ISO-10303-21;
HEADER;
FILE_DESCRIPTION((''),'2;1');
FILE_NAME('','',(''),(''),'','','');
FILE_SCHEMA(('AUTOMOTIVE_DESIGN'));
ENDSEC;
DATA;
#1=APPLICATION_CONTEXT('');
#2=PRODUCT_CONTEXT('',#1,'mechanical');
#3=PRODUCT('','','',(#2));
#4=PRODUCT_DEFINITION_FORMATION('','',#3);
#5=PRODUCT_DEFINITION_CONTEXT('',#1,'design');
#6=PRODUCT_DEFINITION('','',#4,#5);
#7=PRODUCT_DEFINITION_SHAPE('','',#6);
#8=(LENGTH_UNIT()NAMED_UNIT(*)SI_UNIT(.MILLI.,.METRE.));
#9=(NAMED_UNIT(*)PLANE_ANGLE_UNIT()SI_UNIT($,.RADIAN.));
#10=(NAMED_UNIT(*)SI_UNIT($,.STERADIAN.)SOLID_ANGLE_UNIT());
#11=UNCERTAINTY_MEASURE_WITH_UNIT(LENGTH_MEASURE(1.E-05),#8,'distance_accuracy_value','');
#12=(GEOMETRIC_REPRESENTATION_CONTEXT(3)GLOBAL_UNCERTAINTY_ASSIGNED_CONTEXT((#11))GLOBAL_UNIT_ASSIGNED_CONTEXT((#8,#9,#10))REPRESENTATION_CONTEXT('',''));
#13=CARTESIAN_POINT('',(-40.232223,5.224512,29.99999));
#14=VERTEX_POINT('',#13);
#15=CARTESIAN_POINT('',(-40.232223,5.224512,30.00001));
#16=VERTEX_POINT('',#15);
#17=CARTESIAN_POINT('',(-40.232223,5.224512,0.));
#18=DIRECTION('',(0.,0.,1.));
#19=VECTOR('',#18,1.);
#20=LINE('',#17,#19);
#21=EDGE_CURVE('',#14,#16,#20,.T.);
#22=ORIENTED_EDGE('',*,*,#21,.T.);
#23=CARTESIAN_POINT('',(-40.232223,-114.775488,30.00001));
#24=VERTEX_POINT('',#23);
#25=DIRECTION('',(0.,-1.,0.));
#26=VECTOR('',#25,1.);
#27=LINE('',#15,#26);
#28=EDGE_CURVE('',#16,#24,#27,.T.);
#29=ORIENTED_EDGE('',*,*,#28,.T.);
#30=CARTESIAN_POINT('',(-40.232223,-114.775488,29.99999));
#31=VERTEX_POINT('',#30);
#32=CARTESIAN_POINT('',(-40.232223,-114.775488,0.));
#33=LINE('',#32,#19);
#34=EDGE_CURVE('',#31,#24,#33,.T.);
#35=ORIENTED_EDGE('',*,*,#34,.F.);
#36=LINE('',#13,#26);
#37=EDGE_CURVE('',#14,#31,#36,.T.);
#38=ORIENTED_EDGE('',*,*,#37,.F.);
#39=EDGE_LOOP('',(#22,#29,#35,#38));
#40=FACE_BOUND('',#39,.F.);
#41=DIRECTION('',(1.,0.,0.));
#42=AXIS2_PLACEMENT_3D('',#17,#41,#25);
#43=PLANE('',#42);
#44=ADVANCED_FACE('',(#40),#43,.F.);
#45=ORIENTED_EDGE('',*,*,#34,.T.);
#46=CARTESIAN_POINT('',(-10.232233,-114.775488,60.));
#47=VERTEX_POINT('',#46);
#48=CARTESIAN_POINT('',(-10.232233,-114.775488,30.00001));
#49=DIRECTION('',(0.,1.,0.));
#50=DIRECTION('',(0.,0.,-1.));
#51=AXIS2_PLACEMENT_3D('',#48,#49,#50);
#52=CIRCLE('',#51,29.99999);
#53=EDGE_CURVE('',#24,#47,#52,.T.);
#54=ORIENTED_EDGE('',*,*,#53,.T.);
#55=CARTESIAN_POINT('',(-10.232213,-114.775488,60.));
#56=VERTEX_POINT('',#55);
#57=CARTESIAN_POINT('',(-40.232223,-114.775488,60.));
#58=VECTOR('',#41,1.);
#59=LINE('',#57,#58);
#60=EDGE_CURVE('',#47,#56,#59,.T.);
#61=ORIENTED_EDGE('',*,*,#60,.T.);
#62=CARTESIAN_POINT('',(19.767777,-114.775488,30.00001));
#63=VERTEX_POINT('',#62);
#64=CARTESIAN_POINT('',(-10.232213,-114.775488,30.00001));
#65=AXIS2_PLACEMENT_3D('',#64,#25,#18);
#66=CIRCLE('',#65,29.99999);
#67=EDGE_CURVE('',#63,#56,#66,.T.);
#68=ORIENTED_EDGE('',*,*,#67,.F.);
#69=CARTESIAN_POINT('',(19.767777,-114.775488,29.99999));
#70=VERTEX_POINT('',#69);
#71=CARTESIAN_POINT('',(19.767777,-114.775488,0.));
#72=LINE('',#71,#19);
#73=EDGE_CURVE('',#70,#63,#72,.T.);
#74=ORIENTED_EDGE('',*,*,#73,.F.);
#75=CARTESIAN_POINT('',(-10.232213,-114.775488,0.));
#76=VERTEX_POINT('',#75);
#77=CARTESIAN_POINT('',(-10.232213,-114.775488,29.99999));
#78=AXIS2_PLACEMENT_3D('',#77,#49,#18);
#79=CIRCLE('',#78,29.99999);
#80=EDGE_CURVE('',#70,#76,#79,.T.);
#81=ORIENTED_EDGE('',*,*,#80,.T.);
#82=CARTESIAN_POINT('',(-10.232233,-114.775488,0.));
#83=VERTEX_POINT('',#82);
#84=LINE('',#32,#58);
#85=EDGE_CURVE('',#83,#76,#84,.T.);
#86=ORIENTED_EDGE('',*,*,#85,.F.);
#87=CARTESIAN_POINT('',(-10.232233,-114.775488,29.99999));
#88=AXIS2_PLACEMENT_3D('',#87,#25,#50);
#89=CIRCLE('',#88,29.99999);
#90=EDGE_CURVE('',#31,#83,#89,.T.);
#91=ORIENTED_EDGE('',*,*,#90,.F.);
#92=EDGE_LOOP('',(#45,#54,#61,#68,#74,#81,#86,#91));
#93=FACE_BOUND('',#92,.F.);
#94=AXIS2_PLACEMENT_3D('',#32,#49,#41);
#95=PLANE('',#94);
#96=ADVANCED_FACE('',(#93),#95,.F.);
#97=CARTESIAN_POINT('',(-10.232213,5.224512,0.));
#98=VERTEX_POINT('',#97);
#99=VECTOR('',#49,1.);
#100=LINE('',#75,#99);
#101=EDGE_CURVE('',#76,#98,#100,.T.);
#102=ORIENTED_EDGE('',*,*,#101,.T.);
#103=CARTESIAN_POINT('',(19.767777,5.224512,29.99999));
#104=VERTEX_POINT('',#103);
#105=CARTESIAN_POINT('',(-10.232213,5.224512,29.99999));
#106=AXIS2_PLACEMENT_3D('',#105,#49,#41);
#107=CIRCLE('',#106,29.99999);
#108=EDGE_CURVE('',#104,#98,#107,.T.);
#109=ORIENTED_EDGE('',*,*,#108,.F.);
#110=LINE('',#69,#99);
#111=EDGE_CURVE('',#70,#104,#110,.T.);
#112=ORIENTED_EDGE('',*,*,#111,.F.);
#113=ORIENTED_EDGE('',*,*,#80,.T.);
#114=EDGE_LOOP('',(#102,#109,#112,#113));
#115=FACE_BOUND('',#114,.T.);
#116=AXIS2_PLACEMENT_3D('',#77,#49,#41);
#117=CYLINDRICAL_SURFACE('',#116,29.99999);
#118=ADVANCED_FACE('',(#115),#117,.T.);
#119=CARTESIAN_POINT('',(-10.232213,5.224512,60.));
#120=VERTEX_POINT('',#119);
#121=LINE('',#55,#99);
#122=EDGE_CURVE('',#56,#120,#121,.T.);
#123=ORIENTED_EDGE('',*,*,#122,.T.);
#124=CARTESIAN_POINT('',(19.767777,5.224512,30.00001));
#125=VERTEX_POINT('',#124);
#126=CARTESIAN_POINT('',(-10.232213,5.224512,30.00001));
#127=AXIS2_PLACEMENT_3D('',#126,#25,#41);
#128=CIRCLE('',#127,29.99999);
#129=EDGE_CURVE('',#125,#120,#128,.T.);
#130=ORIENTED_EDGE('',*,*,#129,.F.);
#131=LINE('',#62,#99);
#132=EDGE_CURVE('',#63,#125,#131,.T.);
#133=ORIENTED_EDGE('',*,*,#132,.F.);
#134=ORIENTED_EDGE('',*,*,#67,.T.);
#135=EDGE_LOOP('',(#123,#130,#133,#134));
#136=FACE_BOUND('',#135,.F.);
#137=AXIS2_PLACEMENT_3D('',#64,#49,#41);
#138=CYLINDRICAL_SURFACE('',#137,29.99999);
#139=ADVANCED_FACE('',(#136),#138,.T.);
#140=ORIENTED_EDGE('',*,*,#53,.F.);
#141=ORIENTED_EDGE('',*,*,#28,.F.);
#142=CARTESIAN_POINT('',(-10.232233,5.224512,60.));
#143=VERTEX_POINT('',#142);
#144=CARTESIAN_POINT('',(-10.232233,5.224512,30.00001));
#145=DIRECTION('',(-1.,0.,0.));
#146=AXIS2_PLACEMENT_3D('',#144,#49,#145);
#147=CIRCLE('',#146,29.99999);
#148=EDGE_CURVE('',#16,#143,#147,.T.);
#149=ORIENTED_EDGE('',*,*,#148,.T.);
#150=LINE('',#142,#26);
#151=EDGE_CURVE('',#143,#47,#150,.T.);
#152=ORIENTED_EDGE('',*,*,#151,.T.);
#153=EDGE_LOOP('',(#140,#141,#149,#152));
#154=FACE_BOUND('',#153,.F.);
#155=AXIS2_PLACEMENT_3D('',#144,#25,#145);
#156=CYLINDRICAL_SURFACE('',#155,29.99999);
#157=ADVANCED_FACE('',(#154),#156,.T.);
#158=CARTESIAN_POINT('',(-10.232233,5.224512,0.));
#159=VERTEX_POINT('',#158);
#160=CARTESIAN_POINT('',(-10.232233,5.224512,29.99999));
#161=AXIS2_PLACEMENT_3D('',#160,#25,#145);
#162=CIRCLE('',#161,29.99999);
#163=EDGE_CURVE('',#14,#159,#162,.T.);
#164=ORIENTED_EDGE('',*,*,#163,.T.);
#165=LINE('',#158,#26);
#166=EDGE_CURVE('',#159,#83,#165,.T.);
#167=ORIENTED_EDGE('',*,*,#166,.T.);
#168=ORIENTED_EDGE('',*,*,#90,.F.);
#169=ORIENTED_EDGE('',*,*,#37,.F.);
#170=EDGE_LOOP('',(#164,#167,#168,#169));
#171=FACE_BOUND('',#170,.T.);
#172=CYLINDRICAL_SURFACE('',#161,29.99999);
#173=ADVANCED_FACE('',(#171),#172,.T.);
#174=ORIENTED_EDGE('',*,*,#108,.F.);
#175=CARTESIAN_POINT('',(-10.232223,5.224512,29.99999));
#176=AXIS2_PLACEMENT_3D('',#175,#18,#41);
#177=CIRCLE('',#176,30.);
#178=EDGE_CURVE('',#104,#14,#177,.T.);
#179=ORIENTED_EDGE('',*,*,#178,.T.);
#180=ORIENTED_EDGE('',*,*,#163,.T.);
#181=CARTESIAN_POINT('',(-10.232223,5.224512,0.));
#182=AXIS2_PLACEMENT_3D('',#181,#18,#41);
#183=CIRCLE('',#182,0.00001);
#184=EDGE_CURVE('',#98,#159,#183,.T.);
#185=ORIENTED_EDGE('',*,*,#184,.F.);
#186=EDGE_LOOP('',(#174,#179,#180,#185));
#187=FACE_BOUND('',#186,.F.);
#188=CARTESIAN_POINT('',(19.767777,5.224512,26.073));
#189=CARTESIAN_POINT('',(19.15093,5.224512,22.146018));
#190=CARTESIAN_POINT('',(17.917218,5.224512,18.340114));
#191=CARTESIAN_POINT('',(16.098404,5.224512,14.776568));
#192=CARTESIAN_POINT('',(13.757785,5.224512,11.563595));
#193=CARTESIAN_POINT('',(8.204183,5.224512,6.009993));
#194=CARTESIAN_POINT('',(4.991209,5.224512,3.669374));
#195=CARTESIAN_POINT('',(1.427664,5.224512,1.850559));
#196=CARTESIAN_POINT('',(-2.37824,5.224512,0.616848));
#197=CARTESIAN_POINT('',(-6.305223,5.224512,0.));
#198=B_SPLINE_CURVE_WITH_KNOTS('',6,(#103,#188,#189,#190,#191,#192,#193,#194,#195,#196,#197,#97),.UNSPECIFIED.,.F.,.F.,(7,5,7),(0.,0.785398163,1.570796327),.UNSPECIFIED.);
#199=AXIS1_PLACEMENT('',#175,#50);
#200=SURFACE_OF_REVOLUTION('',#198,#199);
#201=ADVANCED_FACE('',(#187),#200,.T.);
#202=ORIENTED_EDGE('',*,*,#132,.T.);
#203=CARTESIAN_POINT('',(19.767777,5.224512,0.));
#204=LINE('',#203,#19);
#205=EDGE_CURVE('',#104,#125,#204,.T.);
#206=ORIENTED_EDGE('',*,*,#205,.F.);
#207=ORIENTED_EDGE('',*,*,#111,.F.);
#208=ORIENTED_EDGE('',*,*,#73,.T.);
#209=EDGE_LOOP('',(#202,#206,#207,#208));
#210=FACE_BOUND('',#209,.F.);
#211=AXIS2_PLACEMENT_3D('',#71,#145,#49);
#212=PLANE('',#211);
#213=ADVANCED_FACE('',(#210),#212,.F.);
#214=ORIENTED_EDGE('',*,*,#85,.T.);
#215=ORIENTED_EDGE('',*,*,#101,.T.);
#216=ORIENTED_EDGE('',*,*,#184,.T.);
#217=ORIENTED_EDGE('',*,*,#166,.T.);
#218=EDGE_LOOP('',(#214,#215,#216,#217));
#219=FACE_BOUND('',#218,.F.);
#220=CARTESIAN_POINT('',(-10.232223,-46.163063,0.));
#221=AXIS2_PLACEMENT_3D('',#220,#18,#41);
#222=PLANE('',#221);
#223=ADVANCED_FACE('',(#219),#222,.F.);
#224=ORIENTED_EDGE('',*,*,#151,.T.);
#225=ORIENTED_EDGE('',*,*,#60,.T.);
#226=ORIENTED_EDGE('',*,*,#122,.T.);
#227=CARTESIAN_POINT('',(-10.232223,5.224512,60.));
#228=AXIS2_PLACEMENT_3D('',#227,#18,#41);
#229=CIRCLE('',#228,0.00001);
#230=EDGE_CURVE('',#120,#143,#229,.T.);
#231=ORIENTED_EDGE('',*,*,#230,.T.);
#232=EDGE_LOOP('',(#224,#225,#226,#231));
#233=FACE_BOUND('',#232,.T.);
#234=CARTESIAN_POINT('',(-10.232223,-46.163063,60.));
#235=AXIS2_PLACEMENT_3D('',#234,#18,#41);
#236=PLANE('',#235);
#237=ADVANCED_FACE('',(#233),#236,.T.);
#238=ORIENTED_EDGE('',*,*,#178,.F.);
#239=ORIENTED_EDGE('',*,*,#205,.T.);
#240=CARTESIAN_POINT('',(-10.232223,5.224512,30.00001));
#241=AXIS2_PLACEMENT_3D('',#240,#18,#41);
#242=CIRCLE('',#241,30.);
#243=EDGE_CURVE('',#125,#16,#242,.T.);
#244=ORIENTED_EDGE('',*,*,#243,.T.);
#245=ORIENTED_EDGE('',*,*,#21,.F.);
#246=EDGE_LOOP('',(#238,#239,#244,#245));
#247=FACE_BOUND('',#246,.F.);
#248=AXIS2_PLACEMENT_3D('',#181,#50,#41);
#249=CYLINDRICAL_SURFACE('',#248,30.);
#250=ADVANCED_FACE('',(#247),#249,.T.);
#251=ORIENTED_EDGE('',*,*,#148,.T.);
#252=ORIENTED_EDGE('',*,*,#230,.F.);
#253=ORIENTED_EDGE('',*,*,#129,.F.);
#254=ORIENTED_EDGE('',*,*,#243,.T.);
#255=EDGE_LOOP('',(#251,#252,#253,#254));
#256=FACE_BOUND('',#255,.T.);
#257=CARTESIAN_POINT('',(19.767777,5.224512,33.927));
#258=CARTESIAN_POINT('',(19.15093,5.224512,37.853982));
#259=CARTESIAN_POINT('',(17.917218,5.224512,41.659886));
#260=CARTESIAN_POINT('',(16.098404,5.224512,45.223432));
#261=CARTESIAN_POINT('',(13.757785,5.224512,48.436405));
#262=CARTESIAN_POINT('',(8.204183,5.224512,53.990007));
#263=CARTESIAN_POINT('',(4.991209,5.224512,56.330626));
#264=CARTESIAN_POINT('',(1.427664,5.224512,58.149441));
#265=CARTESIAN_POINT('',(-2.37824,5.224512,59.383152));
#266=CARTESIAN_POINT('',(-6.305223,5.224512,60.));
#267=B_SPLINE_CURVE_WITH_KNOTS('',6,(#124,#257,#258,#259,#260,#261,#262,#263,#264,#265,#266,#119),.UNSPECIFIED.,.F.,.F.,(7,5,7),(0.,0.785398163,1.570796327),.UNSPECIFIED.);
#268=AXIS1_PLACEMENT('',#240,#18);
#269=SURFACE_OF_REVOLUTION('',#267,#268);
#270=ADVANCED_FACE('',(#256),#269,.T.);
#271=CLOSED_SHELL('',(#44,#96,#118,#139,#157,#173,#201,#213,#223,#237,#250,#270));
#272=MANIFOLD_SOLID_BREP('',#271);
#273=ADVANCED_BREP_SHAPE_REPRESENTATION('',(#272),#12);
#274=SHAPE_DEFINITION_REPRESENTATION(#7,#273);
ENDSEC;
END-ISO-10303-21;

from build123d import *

# Parameters (mm, degrees)
F1_DEPTH = 60
F2_R     = 29.99999


# Not quite as in the source:
# - a fillet or chamfer is up to 0.001 mm smaller than in the source, because OpenCascade refuses the exact size


with BuildPart() as f1:
    # F0 (on Top) → F1 (new body)
    with BuildSketch(Plane.XY):
        with BuildLine():
            ThreePointArc((-10.2322225652, 35.2245123306), (-31.4454260008, 26.4377157662), (-40.2322225652, 5.2245123306))
            Line((-40.2322225652, 5.2245123306), (-40.2322225652, -114.7754876694))
            Line((-40.2322225652, -114.7754876694), (19.7677774348, -114.7754876694))
            Line((19.7677774348, -114.7754876694), (19.7677774348, 5.2245123306))
            ThreePointArc((19.7677774348, 5.2245123306), (10.9809808704, 26.4377157662), (-10.2322225652, 35.2245123306))
        make_face()
    extrude(amount=F1_DEPTH)

    # F2 (radius 30 in the source; OpenCascade refuses exactly that, so slightly less here)
    f2_edges = [f1.edges().sort_by_distance(p)[0] for p in [
        (-40.232223, -54.775488, 0),
        (-40.232223, -54.775488, 60),
    ]]
    fillet(f2_edges, radius=F2_R)


solid = f1.part
